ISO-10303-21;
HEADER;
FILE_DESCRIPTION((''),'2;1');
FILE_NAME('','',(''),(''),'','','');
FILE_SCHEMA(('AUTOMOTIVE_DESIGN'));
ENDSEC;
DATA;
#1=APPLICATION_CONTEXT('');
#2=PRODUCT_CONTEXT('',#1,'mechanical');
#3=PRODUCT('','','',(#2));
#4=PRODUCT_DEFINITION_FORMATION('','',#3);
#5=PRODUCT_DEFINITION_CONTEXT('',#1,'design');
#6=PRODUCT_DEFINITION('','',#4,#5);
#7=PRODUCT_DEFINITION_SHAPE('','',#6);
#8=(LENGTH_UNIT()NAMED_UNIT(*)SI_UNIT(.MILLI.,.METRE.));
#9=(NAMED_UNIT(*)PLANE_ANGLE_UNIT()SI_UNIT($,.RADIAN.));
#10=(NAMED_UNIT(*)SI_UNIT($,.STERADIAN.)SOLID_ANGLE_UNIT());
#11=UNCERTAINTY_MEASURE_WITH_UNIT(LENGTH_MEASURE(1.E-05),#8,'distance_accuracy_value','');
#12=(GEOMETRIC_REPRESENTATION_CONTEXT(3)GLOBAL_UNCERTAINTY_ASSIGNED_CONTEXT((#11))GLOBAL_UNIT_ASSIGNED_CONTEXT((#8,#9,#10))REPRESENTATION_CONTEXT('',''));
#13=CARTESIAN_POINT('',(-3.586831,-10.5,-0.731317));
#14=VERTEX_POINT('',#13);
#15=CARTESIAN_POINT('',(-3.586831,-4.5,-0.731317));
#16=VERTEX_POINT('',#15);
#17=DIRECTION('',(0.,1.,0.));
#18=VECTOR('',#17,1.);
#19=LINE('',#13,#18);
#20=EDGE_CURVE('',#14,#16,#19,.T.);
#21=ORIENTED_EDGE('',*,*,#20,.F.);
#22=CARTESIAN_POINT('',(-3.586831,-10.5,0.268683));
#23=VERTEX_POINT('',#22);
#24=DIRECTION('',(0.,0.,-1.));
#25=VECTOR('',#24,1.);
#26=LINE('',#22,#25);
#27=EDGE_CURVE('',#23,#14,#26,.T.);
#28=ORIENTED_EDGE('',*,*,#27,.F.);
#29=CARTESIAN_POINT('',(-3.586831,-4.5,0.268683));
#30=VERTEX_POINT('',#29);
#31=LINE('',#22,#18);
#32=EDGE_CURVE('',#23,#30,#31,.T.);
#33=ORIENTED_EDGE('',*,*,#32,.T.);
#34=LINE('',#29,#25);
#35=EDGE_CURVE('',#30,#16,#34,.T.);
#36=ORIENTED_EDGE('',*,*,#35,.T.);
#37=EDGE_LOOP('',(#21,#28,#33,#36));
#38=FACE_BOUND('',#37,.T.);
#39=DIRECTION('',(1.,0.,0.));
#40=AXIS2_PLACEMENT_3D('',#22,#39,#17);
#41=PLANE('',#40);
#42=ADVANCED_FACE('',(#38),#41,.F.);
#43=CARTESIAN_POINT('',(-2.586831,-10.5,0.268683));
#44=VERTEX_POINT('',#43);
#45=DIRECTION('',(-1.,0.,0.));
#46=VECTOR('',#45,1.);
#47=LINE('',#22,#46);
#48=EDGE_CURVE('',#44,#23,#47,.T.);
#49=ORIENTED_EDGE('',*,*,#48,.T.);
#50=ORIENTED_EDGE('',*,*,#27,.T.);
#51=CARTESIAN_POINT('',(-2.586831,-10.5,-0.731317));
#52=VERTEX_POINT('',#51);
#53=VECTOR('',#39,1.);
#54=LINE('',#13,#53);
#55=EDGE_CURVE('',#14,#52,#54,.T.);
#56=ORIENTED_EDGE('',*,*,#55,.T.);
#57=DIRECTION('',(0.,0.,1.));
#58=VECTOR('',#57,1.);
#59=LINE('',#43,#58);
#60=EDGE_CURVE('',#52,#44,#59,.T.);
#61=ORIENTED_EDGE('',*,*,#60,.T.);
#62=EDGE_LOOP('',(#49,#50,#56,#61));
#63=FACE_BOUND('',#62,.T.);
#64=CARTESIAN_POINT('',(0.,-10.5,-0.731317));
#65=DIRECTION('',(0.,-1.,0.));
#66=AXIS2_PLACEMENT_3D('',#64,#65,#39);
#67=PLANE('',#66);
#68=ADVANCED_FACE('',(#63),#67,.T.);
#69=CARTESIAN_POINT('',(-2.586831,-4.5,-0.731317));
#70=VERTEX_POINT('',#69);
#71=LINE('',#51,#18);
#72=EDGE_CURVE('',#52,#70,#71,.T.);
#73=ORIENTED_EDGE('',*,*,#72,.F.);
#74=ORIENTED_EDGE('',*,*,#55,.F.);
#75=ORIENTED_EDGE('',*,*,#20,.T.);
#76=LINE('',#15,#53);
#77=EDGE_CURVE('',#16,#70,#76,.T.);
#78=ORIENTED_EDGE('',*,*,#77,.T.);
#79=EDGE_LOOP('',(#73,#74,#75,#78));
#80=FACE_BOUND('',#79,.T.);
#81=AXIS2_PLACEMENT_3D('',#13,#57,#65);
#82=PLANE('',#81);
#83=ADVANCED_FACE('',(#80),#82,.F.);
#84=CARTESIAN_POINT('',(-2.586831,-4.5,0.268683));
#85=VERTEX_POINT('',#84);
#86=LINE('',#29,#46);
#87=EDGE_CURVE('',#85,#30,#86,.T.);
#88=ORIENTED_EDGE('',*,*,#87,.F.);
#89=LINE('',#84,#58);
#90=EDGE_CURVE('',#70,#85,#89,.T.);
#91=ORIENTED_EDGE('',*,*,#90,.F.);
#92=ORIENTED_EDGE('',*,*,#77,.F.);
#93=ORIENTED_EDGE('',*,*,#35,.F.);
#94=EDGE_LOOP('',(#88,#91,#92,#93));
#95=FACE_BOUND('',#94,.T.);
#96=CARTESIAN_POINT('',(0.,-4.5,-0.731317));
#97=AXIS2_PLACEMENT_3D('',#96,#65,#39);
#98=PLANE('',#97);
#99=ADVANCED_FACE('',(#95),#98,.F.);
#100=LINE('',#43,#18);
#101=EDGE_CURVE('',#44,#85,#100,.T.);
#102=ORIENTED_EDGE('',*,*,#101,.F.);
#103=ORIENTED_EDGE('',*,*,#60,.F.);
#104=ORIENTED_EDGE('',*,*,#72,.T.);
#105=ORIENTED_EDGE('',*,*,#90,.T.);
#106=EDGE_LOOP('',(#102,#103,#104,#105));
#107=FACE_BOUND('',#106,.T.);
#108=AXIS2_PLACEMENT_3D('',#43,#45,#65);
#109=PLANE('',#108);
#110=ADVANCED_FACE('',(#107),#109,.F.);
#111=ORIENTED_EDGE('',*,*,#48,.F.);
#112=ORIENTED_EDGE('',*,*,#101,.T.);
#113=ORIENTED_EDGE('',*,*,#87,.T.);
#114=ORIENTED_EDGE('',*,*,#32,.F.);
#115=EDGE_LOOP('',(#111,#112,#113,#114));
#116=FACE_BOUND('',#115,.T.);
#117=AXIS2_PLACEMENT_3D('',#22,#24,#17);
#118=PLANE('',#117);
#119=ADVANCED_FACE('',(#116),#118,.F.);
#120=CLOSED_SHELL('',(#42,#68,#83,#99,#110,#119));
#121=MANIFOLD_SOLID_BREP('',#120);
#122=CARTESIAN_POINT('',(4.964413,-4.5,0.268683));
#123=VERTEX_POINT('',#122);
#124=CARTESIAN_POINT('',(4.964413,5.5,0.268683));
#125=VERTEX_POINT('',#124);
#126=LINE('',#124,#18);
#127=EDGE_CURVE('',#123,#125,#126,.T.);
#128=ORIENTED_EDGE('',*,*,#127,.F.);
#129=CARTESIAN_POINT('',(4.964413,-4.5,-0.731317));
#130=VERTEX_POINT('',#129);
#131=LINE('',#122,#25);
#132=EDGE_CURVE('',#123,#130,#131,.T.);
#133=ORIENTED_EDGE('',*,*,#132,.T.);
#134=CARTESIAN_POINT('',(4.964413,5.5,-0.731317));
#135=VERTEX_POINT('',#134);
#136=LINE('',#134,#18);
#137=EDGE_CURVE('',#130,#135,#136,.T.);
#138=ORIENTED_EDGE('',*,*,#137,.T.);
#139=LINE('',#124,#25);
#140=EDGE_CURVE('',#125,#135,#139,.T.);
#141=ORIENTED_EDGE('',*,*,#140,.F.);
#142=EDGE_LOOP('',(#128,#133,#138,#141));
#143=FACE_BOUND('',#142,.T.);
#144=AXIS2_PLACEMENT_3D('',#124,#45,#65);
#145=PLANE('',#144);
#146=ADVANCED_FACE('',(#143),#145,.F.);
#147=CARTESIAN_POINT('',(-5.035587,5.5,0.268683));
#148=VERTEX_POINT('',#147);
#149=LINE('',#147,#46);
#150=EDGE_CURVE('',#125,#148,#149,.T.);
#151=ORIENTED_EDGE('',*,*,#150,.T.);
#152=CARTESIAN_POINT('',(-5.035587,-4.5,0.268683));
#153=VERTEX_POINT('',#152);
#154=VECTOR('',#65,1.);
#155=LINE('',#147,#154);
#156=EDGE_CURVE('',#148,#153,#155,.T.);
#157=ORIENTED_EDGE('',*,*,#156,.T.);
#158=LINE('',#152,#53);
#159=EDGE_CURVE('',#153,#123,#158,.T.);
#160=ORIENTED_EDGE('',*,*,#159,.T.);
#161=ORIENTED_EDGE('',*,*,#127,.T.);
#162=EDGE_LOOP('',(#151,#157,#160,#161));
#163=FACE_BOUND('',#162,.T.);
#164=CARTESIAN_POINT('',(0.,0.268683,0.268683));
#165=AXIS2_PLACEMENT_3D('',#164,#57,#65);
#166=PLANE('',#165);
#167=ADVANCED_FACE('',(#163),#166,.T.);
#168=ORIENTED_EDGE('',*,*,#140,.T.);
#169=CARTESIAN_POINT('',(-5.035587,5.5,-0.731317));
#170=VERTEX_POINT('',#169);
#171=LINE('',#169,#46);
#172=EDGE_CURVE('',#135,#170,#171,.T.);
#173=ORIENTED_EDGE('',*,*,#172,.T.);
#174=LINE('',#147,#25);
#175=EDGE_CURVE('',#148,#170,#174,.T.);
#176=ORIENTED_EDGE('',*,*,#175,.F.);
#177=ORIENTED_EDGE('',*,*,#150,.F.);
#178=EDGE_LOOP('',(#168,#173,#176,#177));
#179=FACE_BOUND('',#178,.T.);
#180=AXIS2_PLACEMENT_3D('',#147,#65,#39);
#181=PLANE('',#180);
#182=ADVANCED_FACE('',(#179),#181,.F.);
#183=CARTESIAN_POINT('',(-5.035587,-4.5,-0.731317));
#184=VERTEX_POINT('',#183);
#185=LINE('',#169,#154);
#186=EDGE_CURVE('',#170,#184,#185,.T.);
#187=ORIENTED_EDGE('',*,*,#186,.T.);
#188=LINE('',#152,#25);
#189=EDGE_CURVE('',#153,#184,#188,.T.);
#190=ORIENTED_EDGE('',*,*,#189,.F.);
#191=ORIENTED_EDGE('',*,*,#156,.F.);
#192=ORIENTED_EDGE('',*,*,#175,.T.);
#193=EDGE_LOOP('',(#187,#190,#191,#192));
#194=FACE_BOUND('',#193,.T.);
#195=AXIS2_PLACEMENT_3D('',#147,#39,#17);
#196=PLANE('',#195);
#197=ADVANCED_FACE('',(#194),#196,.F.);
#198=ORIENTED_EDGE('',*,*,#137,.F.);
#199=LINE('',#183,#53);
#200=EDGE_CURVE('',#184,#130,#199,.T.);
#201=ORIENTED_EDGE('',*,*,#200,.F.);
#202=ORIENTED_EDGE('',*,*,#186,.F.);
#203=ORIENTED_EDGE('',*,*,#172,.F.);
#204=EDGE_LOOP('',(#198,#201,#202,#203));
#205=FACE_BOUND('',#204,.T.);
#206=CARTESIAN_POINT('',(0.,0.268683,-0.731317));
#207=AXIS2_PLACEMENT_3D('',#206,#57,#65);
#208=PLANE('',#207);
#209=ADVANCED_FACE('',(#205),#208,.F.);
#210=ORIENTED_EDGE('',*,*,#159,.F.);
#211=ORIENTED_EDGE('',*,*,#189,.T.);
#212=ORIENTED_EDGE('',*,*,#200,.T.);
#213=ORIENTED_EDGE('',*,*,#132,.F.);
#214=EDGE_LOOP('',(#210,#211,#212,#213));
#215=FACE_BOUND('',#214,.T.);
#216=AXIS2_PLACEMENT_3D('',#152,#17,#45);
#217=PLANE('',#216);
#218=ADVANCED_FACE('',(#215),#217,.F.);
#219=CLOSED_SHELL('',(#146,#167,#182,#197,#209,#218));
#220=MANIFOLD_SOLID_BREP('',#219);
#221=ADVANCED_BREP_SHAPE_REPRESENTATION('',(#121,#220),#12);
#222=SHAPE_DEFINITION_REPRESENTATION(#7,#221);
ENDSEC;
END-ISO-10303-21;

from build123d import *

# Parameters (mm, degrees)
SKETCH1_W             = 10
SKETCH1_H             = 10
BOSS_EXTRUDE1_DEPTH   = 1
SKETCH2_W             = 1
SKETCH2_H             = 1
BOSS_EXTRUDE2_DEPTH   = 6
BODY_MOVE_COPY1_ANGLE = 90
BODY_MOVE_COPY2_ANGLE = 90


with BuildPart() as part:
    # Sketch1 → Boss-Extrude1 (new body)
    with BuildSketch(Plane(origin=(0, 0, 0), x_dir=(1, 0, 0), z_dir=(0, 1, 0))):
        with Locations((-0.035587189, 0.231316726)):
            Rectangle(SKETCH1_W, SKETCH1_H)
    extrude(amount=BOSS_EXTRUDE1_DEPTH)


with BuildPart() as body_2:
    # Sketch2 → Boss-Extrude2 (new body)
    with BuildSketch(Plane.XY.offset(4.768683274)):
        with Locations((-3.086831355, 0.5)):
            Rectangle(SKETCH2_W, SKETCH2_H)
    extrude(amount=BOSS_EXTRUDE2_DEPTH)


with BuildPart() as part_1:
    # Body-Move/Copy1: moved
    add(part.part.rotate(Axis((0, 0.5, -0.231316726), (1, 0, 0)), BODY_MOVE_COPY1_ANGLE))


with BuildPart() as body_2_1:
    # Body-Move/Copy2: moved
    add(body_2.part.rotate(Axis((0, 0.5, 7.768683274), (1, 0, 0)), BODY_MOVE_COPY2_ANGLE))


with BuildPart() as body_2_2:
    # Body-Move/Copy3: read off the stored shape, not the designer's step
    # Body-Move/Copy3: moved
    add(body_2_1.part.moved(Location((0, -8, -8))))


solid = Compound([part_1.part, body_2_2.part])
